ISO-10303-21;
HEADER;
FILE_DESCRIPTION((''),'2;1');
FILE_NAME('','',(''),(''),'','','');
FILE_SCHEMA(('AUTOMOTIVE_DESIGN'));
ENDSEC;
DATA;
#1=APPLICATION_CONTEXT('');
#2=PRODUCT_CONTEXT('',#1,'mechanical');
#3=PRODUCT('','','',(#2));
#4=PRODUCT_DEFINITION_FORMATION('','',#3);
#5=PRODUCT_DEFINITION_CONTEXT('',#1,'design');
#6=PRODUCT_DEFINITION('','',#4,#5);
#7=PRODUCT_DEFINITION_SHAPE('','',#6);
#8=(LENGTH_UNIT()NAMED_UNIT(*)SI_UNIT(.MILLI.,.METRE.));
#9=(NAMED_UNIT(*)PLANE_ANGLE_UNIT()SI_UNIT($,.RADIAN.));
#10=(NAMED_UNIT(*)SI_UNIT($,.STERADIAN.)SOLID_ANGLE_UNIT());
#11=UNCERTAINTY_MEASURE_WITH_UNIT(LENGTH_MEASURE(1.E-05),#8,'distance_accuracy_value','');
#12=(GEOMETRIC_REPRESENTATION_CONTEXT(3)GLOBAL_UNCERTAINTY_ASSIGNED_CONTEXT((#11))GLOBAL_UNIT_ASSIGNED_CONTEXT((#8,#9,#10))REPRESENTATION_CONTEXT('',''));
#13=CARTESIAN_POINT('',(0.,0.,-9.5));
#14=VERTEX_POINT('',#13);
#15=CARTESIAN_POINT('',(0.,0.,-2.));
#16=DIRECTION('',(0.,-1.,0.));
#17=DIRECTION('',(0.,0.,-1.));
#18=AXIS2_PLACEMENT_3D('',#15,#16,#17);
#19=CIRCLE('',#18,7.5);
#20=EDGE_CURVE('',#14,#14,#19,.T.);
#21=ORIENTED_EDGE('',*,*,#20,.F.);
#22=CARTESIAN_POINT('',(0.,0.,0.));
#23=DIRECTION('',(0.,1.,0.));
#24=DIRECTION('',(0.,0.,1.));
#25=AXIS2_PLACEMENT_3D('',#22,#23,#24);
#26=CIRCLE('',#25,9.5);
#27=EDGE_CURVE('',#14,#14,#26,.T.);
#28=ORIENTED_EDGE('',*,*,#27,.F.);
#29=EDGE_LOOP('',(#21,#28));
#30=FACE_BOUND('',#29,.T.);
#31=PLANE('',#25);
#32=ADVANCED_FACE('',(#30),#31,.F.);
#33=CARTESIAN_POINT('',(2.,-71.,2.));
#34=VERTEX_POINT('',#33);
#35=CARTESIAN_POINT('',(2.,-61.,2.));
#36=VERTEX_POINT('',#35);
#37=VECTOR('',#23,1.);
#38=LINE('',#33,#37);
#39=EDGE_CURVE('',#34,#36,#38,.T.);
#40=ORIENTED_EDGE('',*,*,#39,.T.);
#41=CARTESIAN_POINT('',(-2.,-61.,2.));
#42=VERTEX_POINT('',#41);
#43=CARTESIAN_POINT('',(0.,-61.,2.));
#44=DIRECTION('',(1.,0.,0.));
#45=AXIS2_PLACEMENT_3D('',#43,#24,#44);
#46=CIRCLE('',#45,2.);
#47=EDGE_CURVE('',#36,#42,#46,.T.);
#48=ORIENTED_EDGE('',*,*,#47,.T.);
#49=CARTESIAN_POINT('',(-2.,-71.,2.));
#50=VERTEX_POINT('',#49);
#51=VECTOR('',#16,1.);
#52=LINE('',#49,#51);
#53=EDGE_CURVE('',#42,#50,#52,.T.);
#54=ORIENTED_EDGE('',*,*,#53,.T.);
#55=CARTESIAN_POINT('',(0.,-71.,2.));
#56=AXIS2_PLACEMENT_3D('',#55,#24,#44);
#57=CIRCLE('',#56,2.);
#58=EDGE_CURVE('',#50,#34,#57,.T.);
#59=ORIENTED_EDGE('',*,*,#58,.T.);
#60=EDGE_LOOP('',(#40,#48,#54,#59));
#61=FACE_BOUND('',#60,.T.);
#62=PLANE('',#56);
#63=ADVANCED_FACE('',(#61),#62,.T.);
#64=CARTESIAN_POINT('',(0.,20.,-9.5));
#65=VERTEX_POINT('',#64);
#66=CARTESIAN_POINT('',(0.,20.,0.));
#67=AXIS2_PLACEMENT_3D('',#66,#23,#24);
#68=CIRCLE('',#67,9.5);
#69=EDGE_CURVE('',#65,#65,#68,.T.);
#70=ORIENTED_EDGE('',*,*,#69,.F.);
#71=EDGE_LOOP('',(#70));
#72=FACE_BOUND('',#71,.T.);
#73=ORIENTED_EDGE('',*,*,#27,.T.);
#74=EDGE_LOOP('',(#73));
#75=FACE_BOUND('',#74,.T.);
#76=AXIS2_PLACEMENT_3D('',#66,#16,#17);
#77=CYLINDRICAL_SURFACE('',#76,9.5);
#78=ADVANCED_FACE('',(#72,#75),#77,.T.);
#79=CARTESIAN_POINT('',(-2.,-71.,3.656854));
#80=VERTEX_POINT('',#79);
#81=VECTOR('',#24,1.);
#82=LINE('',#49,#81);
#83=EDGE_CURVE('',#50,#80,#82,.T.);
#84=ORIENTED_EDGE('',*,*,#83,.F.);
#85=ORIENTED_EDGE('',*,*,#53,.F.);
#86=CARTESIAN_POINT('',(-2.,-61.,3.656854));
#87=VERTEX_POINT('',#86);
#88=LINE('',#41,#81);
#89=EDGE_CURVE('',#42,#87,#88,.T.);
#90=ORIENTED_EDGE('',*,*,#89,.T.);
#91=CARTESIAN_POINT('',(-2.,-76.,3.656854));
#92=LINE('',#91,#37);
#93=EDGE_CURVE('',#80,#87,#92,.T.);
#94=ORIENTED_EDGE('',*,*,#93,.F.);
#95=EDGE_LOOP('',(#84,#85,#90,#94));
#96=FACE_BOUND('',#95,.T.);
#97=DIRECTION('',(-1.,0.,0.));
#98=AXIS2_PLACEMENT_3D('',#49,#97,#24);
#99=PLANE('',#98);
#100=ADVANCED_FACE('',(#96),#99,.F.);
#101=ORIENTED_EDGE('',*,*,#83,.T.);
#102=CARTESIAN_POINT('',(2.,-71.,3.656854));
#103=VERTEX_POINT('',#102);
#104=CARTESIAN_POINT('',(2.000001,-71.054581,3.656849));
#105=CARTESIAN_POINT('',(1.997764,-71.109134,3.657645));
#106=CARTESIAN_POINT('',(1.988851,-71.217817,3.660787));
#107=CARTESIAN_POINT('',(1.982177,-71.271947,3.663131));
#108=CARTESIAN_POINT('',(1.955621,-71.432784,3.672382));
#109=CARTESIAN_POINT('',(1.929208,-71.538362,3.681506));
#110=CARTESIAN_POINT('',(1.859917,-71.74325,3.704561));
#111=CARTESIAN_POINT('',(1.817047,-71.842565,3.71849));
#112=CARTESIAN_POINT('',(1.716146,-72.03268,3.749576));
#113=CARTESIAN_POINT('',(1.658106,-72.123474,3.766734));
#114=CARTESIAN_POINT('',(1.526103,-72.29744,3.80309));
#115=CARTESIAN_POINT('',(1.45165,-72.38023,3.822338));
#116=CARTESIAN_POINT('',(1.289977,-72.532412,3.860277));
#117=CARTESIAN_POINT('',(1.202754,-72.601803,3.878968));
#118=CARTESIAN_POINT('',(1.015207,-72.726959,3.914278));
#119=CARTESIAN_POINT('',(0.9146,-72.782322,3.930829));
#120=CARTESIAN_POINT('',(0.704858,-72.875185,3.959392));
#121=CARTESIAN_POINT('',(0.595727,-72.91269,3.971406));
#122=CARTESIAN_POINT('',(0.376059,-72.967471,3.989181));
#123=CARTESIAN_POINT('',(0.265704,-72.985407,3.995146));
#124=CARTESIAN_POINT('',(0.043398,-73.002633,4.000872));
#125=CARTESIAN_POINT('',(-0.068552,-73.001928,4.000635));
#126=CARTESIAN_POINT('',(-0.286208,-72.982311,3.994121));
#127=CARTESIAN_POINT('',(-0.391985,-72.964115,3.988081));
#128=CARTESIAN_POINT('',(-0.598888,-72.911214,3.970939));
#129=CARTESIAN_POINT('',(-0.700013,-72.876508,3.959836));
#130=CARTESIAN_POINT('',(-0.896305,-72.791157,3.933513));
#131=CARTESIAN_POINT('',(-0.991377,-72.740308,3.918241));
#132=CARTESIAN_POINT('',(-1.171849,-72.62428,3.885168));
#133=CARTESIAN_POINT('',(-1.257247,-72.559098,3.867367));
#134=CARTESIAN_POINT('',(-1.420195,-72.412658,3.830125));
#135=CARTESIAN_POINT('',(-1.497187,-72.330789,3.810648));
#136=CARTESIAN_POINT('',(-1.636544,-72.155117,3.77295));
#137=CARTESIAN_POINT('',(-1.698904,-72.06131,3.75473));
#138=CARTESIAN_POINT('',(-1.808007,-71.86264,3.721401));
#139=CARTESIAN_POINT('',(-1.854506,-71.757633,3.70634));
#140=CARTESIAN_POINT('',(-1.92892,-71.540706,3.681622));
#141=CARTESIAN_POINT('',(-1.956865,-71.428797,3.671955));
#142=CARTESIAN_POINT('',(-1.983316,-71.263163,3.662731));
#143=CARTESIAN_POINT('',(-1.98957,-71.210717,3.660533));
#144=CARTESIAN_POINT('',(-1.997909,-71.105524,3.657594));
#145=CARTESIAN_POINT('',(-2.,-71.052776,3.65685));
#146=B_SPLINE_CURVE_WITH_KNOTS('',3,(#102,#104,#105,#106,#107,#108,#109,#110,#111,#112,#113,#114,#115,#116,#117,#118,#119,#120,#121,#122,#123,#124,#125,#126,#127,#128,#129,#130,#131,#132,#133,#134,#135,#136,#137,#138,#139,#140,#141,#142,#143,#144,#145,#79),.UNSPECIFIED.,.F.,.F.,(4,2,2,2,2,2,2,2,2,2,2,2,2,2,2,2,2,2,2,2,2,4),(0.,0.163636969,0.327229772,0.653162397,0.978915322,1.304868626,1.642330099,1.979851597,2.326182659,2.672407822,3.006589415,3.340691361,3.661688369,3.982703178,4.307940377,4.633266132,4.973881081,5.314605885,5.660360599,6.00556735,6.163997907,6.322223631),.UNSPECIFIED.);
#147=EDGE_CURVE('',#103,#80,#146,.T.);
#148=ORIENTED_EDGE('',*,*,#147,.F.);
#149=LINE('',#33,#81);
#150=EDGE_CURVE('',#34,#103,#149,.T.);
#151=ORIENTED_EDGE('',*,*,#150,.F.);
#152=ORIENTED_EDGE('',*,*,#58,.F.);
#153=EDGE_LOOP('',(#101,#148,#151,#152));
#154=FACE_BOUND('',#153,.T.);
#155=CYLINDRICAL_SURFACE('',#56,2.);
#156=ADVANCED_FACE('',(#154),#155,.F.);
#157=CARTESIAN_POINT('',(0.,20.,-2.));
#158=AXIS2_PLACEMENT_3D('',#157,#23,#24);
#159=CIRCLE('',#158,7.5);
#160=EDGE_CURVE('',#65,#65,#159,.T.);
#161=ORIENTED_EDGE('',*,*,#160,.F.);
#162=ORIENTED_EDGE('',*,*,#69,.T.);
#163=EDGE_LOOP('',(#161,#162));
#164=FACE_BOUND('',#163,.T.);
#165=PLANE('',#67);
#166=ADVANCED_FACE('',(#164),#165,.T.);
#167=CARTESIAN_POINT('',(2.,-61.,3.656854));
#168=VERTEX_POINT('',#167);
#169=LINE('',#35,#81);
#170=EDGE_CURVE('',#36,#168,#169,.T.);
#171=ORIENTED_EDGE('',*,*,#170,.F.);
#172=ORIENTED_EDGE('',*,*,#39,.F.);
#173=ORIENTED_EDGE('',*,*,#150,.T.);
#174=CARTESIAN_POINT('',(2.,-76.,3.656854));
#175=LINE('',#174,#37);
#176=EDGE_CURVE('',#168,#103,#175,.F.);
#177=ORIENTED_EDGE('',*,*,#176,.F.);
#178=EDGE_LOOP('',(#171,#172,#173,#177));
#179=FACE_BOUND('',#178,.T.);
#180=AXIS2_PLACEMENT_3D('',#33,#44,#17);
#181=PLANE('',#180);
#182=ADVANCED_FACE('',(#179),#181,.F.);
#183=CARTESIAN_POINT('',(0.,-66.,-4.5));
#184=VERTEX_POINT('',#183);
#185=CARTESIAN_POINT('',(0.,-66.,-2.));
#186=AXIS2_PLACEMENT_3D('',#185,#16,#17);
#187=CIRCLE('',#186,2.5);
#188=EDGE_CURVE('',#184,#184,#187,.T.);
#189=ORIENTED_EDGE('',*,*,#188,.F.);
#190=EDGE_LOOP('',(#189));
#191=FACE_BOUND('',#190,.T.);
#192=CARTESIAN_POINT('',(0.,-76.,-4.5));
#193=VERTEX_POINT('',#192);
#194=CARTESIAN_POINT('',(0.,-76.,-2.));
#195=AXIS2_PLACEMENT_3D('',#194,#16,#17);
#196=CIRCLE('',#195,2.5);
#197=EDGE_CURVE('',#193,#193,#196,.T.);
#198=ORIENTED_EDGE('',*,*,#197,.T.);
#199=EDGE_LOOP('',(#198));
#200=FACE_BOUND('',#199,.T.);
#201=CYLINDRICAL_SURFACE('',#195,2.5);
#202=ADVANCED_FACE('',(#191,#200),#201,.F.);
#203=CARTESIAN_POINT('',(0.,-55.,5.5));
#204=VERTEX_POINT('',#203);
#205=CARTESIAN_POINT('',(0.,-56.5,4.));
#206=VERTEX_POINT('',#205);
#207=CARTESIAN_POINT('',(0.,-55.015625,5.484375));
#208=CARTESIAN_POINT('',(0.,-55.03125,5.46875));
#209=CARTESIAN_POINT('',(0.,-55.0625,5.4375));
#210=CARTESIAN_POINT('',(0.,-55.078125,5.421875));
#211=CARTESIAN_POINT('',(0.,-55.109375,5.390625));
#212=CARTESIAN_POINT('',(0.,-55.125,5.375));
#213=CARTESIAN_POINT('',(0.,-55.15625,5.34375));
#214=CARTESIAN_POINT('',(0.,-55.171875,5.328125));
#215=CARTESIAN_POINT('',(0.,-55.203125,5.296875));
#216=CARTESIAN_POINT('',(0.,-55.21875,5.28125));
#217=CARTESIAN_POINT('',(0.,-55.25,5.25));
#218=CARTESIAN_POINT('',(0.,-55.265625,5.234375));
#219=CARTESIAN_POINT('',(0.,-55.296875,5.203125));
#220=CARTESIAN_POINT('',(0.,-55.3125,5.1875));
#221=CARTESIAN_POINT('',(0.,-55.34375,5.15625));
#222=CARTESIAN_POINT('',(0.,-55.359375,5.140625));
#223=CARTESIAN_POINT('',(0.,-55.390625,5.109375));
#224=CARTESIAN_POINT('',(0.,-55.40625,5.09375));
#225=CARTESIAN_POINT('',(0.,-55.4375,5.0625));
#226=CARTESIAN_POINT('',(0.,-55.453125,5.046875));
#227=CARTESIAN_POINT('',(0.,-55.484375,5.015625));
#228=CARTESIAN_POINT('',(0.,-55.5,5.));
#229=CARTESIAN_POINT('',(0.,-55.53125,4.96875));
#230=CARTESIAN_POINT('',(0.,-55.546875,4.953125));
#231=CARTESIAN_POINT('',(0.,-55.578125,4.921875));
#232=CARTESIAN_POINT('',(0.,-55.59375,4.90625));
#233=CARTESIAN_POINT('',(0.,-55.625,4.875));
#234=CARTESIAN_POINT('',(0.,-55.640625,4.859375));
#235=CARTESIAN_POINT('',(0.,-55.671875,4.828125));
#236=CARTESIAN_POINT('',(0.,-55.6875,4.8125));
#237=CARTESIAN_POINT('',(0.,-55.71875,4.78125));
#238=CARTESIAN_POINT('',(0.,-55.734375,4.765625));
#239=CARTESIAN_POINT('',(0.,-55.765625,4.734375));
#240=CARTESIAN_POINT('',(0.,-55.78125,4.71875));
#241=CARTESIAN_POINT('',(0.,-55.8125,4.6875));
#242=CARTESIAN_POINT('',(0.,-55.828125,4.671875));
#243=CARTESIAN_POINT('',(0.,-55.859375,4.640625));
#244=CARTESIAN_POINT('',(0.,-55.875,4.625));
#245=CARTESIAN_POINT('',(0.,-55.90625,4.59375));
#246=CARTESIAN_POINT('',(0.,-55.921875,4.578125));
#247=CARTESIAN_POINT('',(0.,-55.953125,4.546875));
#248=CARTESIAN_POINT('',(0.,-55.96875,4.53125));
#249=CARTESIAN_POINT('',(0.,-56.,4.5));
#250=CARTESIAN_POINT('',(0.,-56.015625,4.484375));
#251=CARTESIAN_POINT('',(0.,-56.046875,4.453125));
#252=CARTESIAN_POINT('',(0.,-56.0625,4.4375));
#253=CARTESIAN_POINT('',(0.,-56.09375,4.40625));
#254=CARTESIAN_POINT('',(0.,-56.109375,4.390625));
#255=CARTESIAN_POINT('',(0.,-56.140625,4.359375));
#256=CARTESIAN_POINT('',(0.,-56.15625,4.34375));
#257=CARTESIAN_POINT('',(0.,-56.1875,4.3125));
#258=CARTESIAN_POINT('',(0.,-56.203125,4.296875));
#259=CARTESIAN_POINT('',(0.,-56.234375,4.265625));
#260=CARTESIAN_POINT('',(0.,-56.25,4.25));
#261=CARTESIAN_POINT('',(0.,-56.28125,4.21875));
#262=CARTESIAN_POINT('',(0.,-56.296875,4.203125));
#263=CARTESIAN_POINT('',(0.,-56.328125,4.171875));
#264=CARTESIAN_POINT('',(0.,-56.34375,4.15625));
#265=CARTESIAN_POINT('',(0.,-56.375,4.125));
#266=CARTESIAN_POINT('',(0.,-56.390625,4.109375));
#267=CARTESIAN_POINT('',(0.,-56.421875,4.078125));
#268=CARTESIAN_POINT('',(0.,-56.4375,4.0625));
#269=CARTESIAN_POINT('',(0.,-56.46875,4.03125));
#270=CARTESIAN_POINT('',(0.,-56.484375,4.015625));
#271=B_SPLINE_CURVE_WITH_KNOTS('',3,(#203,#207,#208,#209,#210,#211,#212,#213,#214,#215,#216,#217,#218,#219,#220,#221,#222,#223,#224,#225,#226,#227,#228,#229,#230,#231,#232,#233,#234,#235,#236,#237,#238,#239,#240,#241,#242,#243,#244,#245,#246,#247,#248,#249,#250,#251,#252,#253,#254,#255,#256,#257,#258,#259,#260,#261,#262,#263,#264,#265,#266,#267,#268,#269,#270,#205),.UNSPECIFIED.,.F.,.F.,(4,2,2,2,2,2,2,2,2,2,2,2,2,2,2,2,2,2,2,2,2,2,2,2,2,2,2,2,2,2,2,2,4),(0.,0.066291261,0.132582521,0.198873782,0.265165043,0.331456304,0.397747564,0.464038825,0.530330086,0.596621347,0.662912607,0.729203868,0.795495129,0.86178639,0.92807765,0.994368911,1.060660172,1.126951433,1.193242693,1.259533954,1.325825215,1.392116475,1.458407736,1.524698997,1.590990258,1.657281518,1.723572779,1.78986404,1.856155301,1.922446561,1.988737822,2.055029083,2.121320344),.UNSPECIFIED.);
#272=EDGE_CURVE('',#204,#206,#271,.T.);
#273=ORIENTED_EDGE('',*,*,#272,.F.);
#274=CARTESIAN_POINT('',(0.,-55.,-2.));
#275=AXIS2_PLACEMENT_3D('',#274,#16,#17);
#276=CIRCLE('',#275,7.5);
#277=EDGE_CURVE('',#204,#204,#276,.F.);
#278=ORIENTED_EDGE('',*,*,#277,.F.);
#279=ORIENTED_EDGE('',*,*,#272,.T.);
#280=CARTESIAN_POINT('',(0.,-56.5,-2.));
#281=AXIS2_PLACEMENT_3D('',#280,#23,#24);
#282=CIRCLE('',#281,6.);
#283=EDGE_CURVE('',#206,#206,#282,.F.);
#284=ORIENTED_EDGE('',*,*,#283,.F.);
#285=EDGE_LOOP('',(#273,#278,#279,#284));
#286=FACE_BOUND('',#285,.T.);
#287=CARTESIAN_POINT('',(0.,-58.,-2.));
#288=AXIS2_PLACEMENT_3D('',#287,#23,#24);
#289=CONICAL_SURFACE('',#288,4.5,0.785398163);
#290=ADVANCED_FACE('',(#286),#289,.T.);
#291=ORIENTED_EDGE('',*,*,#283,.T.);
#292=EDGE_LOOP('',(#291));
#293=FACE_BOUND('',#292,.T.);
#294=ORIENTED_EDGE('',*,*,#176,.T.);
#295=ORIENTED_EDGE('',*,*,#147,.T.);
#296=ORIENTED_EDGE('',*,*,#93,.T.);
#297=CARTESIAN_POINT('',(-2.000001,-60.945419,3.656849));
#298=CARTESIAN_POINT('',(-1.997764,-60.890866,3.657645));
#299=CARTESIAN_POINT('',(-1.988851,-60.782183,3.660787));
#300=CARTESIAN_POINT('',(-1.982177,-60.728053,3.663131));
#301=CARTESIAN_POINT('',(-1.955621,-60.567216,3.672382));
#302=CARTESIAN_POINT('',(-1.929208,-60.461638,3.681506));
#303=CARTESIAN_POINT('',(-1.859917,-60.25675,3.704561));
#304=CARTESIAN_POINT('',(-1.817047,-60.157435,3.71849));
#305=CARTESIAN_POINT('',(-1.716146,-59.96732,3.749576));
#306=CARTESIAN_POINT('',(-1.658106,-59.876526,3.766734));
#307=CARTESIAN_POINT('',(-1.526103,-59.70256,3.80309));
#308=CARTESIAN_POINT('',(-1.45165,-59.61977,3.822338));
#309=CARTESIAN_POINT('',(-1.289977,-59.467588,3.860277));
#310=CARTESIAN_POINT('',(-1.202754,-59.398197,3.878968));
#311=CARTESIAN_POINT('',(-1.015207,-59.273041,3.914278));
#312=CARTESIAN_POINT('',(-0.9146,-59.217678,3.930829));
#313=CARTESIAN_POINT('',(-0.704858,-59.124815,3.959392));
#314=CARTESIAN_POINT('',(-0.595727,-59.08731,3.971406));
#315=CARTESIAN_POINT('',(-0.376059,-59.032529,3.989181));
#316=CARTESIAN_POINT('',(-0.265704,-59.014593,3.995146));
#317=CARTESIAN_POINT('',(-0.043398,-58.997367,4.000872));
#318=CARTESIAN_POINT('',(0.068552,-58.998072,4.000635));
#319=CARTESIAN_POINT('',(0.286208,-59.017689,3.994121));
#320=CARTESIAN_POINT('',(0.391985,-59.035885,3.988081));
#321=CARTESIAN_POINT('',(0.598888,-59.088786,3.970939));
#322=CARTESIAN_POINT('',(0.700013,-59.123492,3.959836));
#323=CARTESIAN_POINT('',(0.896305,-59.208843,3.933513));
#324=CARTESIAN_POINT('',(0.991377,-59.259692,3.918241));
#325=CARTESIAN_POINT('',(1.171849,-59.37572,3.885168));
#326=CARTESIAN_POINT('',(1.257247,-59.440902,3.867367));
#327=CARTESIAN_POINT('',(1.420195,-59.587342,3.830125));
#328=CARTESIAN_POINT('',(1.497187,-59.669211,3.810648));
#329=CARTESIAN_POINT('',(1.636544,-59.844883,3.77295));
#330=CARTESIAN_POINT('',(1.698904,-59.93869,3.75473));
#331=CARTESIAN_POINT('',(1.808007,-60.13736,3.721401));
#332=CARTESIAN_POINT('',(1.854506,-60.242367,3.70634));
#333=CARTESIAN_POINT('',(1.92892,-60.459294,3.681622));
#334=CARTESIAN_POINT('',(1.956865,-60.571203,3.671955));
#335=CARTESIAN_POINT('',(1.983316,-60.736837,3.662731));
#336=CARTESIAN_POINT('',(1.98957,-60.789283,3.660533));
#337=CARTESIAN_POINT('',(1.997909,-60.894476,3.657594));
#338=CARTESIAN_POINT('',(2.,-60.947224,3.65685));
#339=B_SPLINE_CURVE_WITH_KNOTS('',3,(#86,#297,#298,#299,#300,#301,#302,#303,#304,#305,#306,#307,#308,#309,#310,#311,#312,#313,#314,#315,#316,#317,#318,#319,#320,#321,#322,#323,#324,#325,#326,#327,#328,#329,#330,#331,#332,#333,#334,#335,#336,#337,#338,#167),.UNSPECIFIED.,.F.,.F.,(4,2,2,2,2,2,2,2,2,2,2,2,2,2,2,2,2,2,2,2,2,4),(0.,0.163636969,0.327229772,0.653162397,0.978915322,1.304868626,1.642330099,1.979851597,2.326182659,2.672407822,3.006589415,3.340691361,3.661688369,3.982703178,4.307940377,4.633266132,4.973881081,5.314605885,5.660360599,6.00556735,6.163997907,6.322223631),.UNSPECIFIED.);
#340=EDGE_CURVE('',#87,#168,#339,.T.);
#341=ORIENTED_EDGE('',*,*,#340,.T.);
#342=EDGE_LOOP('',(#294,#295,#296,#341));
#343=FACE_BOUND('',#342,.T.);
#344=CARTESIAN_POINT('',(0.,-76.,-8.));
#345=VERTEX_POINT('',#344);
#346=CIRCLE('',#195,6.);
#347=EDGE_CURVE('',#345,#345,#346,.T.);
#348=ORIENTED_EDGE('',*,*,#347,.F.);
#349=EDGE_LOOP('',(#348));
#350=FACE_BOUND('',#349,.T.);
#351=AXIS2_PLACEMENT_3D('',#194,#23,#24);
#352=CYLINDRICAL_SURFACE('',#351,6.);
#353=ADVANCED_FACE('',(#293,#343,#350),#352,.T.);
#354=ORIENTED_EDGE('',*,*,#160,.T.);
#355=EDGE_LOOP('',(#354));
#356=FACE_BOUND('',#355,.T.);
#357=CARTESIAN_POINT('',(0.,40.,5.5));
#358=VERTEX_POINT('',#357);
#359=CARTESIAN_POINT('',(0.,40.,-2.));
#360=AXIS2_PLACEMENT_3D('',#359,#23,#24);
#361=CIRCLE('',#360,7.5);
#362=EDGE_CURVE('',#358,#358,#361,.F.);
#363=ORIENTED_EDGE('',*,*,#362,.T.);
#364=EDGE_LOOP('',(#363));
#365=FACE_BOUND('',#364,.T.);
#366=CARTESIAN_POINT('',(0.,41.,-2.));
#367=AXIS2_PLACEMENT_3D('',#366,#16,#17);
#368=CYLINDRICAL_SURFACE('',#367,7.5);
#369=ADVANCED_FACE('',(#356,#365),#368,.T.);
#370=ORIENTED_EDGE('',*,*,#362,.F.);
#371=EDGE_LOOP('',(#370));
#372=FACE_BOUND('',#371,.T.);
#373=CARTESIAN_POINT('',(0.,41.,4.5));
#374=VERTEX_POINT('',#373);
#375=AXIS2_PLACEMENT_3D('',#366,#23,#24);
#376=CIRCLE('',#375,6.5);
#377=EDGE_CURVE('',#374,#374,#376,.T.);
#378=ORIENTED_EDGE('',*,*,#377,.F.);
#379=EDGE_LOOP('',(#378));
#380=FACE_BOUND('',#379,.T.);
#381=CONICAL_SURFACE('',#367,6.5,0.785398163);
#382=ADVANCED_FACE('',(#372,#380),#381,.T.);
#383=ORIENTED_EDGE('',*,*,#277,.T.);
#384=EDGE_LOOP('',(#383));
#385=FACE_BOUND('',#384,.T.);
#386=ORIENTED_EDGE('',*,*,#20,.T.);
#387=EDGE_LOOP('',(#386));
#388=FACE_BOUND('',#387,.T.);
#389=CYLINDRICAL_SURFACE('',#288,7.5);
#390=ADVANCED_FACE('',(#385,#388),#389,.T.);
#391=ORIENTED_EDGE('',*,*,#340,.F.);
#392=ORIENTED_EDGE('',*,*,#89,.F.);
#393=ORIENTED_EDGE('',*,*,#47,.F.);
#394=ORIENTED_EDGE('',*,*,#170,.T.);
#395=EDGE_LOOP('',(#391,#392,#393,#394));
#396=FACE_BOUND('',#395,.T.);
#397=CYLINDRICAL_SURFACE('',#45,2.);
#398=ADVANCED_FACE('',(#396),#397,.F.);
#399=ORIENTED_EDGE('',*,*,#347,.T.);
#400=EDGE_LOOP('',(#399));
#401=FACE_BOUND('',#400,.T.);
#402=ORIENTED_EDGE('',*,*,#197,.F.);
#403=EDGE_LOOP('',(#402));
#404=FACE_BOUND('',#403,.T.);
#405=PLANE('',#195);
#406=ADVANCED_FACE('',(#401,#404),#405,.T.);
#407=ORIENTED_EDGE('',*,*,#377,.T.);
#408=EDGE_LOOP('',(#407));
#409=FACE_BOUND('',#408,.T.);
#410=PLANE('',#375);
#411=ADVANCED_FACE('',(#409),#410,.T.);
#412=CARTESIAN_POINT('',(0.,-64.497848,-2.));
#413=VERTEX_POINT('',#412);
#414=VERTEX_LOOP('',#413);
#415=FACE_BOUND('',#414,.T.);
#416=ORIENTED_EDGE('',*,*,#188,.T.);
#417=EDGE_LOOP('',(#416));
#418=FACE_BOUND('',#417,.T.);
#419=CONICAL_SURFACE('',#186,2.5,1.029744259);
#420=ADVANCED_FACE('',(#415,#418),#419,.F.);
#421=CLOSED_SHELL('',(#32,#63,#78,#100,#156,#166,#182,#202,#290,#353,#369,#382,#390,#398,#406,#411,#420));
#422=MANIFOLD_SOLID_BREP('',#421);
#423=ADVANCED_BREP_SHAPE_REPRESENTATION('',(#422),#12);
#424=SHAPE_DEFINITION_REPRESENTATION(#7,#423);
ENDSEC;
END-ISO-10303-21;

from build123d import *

# Parameters (mm, degrees)
SKETCH1_R                   = 9.5
BOSS_EXTRUDE1_DEPTH         = 20
SKETCH2_R                   = 7.5
BOSS_EXTRUDE2_DEPTH         = 58
SKETCH3_R                   = 6
BOSS_EXTRUDE3_DEPTH         = 18
BOSS_EXTRUDE4_START         = 21
SKETCH4_R                   = 7.5
BOSS_EXTRUDE4_DEPTH         = 21
CUT_EXTRUDE1_DEPTH          = 2
TAP_DRILL_FOR_M4_TAP1_D     = 5
TAP_DRILL_FOR_M4_TAP1_DEPTH = 10
TAP_DRILL_FOR_M4_TAP1_TIP   = 1.502151548
CHAMFER1_SIZE               = 1
CHAMFER2_SIZE               = 3


with BuildPart() as part:
    # Sketch1 → Boss-Extrude1 (new body)
    with BuildSketch(Plane(origin=(0, 0, 0), x_dir=(-1, 0, 0), z_dir=(0, 1, 0))):
        with Locations(Location((0, 0, 0), (0, 0, 90))):
            Circle(SKETCH1_R)
    extrude(amount=BOSS_EXTRUDE1_DEPTH)

    # Sketch2 → Boss-Extrude2 (add)
    with BuildSketch(Plane.XZ):
        with Locations(Location((0, -2, 0), (0, 0, 270))):
            Circle(SKETCH2_R)
    extrude(amount=BOSS_EXTRUDE2_DEPTH)

    # Sketch3 → Boss-Extrude3 (add)
    with BuildSketch(Plane.XZ.offset(58)):
        with Locations(Location((0, -2, 0), (0, 0, 270))):
            Circle(SKETCH3_R)
    extrude(amount=BOSS_EXTRUDE3_DEPTH)

    # Sketch4 → Boss-Extrude4 (add)
    with BuildSketch(Plane(origin=(0, 20, 0), x_dir=(-1, 0, 0), z_dir=(0, 1, 0)).offset(BOSS_EXTRUDE4_START)):
        with Locations(Location((0, -2, 0), (0, 0, 270))):
            Circle(SKETCH4_R)
    extrude(amount=-BOSS_EXTRUDE4_DEPTH)

    # Sketch5 → Cut-Extrude1 (cut)
    with BuildSketch(Plane(origin=(0, 0, 4), x_dir=(0, 1, 0), z_dir=(0, 0, 1))):
        with BuildLine():
            Line((-71, 2), (-61, 2))
            ThreePointArc((-61, 2), (-59, 0), (-61, -2))
            Line((-61, -2), (-71, -2))
            ThreePointArc((-71, -2), (-73, 0), (-71, 2))
        make_face()
    extrude(amount=-CUT_EXTRUDE1_DEPTH, mode=Mode.SUBTRACT)

    # Tap Drill for M4 Tap1
    with Locations(Plane.XZ.offset(76)):
        with Locations((0, -2)):
            Hole(TAP_DRILL_FOR_M4_TAP1_D / 2, depth=TAP_DRILL_FOR_M4_TAP1_DEPTH)
            with Locations((0, 0, -(TAP_DRILL_FOR_M4_TAP1_DEPTH + TAP_DRILL_FOR_M4_TAP1_TIP / 2))):  # 118° drill point
                Cone(0, TAP_DRILL_FOR_M4_TAP1_D / 2, TAP_DRILL_FOR_M4_TAP1_TIP, mode=Mode.SUBTRACT)

    # Chamfer1
    chamfer1_edges = [part.edges().sort_by_distance(p)[0] for p in [
        (0, 41, 5.5),
    ]]
    chamfer(chamfer1_edges, length=CHAMFER1_SIZE)

    # Chamfer2
    # the kernel refuses this chamfer: 3 mm, written as the material it takes off along each edge
    with BuildSketch(Plane(origin=(0, -58, -2), x_dir=(0, 0, -1), z_dir=(-1, 0, 0))) as chamfer2_piece_1_section:
        Polygon((7.5, -CHAMFER2_SIZE), (7.5 - CHAMFER2_SIZE, 0), (7.5, 0), align=None)
    chamfer2_piece_1 = revolve(axis=Axis((0, -58, -2), (0, -1, 0)), mode=Mode.PRIVATE)
    chamfer2_piece_1 = chamfer2_piece_1 - Plane(origin=(0, -55.74588243, -2), x_dir=(0, 0, -1), z_dir=(0, 1, 0)) * Cylinder(6, 30, mode=Mode.PRIVATE)
    add(chamfer2_piece_1, mode=Mode.SUBTRACT)


solid = part.part
